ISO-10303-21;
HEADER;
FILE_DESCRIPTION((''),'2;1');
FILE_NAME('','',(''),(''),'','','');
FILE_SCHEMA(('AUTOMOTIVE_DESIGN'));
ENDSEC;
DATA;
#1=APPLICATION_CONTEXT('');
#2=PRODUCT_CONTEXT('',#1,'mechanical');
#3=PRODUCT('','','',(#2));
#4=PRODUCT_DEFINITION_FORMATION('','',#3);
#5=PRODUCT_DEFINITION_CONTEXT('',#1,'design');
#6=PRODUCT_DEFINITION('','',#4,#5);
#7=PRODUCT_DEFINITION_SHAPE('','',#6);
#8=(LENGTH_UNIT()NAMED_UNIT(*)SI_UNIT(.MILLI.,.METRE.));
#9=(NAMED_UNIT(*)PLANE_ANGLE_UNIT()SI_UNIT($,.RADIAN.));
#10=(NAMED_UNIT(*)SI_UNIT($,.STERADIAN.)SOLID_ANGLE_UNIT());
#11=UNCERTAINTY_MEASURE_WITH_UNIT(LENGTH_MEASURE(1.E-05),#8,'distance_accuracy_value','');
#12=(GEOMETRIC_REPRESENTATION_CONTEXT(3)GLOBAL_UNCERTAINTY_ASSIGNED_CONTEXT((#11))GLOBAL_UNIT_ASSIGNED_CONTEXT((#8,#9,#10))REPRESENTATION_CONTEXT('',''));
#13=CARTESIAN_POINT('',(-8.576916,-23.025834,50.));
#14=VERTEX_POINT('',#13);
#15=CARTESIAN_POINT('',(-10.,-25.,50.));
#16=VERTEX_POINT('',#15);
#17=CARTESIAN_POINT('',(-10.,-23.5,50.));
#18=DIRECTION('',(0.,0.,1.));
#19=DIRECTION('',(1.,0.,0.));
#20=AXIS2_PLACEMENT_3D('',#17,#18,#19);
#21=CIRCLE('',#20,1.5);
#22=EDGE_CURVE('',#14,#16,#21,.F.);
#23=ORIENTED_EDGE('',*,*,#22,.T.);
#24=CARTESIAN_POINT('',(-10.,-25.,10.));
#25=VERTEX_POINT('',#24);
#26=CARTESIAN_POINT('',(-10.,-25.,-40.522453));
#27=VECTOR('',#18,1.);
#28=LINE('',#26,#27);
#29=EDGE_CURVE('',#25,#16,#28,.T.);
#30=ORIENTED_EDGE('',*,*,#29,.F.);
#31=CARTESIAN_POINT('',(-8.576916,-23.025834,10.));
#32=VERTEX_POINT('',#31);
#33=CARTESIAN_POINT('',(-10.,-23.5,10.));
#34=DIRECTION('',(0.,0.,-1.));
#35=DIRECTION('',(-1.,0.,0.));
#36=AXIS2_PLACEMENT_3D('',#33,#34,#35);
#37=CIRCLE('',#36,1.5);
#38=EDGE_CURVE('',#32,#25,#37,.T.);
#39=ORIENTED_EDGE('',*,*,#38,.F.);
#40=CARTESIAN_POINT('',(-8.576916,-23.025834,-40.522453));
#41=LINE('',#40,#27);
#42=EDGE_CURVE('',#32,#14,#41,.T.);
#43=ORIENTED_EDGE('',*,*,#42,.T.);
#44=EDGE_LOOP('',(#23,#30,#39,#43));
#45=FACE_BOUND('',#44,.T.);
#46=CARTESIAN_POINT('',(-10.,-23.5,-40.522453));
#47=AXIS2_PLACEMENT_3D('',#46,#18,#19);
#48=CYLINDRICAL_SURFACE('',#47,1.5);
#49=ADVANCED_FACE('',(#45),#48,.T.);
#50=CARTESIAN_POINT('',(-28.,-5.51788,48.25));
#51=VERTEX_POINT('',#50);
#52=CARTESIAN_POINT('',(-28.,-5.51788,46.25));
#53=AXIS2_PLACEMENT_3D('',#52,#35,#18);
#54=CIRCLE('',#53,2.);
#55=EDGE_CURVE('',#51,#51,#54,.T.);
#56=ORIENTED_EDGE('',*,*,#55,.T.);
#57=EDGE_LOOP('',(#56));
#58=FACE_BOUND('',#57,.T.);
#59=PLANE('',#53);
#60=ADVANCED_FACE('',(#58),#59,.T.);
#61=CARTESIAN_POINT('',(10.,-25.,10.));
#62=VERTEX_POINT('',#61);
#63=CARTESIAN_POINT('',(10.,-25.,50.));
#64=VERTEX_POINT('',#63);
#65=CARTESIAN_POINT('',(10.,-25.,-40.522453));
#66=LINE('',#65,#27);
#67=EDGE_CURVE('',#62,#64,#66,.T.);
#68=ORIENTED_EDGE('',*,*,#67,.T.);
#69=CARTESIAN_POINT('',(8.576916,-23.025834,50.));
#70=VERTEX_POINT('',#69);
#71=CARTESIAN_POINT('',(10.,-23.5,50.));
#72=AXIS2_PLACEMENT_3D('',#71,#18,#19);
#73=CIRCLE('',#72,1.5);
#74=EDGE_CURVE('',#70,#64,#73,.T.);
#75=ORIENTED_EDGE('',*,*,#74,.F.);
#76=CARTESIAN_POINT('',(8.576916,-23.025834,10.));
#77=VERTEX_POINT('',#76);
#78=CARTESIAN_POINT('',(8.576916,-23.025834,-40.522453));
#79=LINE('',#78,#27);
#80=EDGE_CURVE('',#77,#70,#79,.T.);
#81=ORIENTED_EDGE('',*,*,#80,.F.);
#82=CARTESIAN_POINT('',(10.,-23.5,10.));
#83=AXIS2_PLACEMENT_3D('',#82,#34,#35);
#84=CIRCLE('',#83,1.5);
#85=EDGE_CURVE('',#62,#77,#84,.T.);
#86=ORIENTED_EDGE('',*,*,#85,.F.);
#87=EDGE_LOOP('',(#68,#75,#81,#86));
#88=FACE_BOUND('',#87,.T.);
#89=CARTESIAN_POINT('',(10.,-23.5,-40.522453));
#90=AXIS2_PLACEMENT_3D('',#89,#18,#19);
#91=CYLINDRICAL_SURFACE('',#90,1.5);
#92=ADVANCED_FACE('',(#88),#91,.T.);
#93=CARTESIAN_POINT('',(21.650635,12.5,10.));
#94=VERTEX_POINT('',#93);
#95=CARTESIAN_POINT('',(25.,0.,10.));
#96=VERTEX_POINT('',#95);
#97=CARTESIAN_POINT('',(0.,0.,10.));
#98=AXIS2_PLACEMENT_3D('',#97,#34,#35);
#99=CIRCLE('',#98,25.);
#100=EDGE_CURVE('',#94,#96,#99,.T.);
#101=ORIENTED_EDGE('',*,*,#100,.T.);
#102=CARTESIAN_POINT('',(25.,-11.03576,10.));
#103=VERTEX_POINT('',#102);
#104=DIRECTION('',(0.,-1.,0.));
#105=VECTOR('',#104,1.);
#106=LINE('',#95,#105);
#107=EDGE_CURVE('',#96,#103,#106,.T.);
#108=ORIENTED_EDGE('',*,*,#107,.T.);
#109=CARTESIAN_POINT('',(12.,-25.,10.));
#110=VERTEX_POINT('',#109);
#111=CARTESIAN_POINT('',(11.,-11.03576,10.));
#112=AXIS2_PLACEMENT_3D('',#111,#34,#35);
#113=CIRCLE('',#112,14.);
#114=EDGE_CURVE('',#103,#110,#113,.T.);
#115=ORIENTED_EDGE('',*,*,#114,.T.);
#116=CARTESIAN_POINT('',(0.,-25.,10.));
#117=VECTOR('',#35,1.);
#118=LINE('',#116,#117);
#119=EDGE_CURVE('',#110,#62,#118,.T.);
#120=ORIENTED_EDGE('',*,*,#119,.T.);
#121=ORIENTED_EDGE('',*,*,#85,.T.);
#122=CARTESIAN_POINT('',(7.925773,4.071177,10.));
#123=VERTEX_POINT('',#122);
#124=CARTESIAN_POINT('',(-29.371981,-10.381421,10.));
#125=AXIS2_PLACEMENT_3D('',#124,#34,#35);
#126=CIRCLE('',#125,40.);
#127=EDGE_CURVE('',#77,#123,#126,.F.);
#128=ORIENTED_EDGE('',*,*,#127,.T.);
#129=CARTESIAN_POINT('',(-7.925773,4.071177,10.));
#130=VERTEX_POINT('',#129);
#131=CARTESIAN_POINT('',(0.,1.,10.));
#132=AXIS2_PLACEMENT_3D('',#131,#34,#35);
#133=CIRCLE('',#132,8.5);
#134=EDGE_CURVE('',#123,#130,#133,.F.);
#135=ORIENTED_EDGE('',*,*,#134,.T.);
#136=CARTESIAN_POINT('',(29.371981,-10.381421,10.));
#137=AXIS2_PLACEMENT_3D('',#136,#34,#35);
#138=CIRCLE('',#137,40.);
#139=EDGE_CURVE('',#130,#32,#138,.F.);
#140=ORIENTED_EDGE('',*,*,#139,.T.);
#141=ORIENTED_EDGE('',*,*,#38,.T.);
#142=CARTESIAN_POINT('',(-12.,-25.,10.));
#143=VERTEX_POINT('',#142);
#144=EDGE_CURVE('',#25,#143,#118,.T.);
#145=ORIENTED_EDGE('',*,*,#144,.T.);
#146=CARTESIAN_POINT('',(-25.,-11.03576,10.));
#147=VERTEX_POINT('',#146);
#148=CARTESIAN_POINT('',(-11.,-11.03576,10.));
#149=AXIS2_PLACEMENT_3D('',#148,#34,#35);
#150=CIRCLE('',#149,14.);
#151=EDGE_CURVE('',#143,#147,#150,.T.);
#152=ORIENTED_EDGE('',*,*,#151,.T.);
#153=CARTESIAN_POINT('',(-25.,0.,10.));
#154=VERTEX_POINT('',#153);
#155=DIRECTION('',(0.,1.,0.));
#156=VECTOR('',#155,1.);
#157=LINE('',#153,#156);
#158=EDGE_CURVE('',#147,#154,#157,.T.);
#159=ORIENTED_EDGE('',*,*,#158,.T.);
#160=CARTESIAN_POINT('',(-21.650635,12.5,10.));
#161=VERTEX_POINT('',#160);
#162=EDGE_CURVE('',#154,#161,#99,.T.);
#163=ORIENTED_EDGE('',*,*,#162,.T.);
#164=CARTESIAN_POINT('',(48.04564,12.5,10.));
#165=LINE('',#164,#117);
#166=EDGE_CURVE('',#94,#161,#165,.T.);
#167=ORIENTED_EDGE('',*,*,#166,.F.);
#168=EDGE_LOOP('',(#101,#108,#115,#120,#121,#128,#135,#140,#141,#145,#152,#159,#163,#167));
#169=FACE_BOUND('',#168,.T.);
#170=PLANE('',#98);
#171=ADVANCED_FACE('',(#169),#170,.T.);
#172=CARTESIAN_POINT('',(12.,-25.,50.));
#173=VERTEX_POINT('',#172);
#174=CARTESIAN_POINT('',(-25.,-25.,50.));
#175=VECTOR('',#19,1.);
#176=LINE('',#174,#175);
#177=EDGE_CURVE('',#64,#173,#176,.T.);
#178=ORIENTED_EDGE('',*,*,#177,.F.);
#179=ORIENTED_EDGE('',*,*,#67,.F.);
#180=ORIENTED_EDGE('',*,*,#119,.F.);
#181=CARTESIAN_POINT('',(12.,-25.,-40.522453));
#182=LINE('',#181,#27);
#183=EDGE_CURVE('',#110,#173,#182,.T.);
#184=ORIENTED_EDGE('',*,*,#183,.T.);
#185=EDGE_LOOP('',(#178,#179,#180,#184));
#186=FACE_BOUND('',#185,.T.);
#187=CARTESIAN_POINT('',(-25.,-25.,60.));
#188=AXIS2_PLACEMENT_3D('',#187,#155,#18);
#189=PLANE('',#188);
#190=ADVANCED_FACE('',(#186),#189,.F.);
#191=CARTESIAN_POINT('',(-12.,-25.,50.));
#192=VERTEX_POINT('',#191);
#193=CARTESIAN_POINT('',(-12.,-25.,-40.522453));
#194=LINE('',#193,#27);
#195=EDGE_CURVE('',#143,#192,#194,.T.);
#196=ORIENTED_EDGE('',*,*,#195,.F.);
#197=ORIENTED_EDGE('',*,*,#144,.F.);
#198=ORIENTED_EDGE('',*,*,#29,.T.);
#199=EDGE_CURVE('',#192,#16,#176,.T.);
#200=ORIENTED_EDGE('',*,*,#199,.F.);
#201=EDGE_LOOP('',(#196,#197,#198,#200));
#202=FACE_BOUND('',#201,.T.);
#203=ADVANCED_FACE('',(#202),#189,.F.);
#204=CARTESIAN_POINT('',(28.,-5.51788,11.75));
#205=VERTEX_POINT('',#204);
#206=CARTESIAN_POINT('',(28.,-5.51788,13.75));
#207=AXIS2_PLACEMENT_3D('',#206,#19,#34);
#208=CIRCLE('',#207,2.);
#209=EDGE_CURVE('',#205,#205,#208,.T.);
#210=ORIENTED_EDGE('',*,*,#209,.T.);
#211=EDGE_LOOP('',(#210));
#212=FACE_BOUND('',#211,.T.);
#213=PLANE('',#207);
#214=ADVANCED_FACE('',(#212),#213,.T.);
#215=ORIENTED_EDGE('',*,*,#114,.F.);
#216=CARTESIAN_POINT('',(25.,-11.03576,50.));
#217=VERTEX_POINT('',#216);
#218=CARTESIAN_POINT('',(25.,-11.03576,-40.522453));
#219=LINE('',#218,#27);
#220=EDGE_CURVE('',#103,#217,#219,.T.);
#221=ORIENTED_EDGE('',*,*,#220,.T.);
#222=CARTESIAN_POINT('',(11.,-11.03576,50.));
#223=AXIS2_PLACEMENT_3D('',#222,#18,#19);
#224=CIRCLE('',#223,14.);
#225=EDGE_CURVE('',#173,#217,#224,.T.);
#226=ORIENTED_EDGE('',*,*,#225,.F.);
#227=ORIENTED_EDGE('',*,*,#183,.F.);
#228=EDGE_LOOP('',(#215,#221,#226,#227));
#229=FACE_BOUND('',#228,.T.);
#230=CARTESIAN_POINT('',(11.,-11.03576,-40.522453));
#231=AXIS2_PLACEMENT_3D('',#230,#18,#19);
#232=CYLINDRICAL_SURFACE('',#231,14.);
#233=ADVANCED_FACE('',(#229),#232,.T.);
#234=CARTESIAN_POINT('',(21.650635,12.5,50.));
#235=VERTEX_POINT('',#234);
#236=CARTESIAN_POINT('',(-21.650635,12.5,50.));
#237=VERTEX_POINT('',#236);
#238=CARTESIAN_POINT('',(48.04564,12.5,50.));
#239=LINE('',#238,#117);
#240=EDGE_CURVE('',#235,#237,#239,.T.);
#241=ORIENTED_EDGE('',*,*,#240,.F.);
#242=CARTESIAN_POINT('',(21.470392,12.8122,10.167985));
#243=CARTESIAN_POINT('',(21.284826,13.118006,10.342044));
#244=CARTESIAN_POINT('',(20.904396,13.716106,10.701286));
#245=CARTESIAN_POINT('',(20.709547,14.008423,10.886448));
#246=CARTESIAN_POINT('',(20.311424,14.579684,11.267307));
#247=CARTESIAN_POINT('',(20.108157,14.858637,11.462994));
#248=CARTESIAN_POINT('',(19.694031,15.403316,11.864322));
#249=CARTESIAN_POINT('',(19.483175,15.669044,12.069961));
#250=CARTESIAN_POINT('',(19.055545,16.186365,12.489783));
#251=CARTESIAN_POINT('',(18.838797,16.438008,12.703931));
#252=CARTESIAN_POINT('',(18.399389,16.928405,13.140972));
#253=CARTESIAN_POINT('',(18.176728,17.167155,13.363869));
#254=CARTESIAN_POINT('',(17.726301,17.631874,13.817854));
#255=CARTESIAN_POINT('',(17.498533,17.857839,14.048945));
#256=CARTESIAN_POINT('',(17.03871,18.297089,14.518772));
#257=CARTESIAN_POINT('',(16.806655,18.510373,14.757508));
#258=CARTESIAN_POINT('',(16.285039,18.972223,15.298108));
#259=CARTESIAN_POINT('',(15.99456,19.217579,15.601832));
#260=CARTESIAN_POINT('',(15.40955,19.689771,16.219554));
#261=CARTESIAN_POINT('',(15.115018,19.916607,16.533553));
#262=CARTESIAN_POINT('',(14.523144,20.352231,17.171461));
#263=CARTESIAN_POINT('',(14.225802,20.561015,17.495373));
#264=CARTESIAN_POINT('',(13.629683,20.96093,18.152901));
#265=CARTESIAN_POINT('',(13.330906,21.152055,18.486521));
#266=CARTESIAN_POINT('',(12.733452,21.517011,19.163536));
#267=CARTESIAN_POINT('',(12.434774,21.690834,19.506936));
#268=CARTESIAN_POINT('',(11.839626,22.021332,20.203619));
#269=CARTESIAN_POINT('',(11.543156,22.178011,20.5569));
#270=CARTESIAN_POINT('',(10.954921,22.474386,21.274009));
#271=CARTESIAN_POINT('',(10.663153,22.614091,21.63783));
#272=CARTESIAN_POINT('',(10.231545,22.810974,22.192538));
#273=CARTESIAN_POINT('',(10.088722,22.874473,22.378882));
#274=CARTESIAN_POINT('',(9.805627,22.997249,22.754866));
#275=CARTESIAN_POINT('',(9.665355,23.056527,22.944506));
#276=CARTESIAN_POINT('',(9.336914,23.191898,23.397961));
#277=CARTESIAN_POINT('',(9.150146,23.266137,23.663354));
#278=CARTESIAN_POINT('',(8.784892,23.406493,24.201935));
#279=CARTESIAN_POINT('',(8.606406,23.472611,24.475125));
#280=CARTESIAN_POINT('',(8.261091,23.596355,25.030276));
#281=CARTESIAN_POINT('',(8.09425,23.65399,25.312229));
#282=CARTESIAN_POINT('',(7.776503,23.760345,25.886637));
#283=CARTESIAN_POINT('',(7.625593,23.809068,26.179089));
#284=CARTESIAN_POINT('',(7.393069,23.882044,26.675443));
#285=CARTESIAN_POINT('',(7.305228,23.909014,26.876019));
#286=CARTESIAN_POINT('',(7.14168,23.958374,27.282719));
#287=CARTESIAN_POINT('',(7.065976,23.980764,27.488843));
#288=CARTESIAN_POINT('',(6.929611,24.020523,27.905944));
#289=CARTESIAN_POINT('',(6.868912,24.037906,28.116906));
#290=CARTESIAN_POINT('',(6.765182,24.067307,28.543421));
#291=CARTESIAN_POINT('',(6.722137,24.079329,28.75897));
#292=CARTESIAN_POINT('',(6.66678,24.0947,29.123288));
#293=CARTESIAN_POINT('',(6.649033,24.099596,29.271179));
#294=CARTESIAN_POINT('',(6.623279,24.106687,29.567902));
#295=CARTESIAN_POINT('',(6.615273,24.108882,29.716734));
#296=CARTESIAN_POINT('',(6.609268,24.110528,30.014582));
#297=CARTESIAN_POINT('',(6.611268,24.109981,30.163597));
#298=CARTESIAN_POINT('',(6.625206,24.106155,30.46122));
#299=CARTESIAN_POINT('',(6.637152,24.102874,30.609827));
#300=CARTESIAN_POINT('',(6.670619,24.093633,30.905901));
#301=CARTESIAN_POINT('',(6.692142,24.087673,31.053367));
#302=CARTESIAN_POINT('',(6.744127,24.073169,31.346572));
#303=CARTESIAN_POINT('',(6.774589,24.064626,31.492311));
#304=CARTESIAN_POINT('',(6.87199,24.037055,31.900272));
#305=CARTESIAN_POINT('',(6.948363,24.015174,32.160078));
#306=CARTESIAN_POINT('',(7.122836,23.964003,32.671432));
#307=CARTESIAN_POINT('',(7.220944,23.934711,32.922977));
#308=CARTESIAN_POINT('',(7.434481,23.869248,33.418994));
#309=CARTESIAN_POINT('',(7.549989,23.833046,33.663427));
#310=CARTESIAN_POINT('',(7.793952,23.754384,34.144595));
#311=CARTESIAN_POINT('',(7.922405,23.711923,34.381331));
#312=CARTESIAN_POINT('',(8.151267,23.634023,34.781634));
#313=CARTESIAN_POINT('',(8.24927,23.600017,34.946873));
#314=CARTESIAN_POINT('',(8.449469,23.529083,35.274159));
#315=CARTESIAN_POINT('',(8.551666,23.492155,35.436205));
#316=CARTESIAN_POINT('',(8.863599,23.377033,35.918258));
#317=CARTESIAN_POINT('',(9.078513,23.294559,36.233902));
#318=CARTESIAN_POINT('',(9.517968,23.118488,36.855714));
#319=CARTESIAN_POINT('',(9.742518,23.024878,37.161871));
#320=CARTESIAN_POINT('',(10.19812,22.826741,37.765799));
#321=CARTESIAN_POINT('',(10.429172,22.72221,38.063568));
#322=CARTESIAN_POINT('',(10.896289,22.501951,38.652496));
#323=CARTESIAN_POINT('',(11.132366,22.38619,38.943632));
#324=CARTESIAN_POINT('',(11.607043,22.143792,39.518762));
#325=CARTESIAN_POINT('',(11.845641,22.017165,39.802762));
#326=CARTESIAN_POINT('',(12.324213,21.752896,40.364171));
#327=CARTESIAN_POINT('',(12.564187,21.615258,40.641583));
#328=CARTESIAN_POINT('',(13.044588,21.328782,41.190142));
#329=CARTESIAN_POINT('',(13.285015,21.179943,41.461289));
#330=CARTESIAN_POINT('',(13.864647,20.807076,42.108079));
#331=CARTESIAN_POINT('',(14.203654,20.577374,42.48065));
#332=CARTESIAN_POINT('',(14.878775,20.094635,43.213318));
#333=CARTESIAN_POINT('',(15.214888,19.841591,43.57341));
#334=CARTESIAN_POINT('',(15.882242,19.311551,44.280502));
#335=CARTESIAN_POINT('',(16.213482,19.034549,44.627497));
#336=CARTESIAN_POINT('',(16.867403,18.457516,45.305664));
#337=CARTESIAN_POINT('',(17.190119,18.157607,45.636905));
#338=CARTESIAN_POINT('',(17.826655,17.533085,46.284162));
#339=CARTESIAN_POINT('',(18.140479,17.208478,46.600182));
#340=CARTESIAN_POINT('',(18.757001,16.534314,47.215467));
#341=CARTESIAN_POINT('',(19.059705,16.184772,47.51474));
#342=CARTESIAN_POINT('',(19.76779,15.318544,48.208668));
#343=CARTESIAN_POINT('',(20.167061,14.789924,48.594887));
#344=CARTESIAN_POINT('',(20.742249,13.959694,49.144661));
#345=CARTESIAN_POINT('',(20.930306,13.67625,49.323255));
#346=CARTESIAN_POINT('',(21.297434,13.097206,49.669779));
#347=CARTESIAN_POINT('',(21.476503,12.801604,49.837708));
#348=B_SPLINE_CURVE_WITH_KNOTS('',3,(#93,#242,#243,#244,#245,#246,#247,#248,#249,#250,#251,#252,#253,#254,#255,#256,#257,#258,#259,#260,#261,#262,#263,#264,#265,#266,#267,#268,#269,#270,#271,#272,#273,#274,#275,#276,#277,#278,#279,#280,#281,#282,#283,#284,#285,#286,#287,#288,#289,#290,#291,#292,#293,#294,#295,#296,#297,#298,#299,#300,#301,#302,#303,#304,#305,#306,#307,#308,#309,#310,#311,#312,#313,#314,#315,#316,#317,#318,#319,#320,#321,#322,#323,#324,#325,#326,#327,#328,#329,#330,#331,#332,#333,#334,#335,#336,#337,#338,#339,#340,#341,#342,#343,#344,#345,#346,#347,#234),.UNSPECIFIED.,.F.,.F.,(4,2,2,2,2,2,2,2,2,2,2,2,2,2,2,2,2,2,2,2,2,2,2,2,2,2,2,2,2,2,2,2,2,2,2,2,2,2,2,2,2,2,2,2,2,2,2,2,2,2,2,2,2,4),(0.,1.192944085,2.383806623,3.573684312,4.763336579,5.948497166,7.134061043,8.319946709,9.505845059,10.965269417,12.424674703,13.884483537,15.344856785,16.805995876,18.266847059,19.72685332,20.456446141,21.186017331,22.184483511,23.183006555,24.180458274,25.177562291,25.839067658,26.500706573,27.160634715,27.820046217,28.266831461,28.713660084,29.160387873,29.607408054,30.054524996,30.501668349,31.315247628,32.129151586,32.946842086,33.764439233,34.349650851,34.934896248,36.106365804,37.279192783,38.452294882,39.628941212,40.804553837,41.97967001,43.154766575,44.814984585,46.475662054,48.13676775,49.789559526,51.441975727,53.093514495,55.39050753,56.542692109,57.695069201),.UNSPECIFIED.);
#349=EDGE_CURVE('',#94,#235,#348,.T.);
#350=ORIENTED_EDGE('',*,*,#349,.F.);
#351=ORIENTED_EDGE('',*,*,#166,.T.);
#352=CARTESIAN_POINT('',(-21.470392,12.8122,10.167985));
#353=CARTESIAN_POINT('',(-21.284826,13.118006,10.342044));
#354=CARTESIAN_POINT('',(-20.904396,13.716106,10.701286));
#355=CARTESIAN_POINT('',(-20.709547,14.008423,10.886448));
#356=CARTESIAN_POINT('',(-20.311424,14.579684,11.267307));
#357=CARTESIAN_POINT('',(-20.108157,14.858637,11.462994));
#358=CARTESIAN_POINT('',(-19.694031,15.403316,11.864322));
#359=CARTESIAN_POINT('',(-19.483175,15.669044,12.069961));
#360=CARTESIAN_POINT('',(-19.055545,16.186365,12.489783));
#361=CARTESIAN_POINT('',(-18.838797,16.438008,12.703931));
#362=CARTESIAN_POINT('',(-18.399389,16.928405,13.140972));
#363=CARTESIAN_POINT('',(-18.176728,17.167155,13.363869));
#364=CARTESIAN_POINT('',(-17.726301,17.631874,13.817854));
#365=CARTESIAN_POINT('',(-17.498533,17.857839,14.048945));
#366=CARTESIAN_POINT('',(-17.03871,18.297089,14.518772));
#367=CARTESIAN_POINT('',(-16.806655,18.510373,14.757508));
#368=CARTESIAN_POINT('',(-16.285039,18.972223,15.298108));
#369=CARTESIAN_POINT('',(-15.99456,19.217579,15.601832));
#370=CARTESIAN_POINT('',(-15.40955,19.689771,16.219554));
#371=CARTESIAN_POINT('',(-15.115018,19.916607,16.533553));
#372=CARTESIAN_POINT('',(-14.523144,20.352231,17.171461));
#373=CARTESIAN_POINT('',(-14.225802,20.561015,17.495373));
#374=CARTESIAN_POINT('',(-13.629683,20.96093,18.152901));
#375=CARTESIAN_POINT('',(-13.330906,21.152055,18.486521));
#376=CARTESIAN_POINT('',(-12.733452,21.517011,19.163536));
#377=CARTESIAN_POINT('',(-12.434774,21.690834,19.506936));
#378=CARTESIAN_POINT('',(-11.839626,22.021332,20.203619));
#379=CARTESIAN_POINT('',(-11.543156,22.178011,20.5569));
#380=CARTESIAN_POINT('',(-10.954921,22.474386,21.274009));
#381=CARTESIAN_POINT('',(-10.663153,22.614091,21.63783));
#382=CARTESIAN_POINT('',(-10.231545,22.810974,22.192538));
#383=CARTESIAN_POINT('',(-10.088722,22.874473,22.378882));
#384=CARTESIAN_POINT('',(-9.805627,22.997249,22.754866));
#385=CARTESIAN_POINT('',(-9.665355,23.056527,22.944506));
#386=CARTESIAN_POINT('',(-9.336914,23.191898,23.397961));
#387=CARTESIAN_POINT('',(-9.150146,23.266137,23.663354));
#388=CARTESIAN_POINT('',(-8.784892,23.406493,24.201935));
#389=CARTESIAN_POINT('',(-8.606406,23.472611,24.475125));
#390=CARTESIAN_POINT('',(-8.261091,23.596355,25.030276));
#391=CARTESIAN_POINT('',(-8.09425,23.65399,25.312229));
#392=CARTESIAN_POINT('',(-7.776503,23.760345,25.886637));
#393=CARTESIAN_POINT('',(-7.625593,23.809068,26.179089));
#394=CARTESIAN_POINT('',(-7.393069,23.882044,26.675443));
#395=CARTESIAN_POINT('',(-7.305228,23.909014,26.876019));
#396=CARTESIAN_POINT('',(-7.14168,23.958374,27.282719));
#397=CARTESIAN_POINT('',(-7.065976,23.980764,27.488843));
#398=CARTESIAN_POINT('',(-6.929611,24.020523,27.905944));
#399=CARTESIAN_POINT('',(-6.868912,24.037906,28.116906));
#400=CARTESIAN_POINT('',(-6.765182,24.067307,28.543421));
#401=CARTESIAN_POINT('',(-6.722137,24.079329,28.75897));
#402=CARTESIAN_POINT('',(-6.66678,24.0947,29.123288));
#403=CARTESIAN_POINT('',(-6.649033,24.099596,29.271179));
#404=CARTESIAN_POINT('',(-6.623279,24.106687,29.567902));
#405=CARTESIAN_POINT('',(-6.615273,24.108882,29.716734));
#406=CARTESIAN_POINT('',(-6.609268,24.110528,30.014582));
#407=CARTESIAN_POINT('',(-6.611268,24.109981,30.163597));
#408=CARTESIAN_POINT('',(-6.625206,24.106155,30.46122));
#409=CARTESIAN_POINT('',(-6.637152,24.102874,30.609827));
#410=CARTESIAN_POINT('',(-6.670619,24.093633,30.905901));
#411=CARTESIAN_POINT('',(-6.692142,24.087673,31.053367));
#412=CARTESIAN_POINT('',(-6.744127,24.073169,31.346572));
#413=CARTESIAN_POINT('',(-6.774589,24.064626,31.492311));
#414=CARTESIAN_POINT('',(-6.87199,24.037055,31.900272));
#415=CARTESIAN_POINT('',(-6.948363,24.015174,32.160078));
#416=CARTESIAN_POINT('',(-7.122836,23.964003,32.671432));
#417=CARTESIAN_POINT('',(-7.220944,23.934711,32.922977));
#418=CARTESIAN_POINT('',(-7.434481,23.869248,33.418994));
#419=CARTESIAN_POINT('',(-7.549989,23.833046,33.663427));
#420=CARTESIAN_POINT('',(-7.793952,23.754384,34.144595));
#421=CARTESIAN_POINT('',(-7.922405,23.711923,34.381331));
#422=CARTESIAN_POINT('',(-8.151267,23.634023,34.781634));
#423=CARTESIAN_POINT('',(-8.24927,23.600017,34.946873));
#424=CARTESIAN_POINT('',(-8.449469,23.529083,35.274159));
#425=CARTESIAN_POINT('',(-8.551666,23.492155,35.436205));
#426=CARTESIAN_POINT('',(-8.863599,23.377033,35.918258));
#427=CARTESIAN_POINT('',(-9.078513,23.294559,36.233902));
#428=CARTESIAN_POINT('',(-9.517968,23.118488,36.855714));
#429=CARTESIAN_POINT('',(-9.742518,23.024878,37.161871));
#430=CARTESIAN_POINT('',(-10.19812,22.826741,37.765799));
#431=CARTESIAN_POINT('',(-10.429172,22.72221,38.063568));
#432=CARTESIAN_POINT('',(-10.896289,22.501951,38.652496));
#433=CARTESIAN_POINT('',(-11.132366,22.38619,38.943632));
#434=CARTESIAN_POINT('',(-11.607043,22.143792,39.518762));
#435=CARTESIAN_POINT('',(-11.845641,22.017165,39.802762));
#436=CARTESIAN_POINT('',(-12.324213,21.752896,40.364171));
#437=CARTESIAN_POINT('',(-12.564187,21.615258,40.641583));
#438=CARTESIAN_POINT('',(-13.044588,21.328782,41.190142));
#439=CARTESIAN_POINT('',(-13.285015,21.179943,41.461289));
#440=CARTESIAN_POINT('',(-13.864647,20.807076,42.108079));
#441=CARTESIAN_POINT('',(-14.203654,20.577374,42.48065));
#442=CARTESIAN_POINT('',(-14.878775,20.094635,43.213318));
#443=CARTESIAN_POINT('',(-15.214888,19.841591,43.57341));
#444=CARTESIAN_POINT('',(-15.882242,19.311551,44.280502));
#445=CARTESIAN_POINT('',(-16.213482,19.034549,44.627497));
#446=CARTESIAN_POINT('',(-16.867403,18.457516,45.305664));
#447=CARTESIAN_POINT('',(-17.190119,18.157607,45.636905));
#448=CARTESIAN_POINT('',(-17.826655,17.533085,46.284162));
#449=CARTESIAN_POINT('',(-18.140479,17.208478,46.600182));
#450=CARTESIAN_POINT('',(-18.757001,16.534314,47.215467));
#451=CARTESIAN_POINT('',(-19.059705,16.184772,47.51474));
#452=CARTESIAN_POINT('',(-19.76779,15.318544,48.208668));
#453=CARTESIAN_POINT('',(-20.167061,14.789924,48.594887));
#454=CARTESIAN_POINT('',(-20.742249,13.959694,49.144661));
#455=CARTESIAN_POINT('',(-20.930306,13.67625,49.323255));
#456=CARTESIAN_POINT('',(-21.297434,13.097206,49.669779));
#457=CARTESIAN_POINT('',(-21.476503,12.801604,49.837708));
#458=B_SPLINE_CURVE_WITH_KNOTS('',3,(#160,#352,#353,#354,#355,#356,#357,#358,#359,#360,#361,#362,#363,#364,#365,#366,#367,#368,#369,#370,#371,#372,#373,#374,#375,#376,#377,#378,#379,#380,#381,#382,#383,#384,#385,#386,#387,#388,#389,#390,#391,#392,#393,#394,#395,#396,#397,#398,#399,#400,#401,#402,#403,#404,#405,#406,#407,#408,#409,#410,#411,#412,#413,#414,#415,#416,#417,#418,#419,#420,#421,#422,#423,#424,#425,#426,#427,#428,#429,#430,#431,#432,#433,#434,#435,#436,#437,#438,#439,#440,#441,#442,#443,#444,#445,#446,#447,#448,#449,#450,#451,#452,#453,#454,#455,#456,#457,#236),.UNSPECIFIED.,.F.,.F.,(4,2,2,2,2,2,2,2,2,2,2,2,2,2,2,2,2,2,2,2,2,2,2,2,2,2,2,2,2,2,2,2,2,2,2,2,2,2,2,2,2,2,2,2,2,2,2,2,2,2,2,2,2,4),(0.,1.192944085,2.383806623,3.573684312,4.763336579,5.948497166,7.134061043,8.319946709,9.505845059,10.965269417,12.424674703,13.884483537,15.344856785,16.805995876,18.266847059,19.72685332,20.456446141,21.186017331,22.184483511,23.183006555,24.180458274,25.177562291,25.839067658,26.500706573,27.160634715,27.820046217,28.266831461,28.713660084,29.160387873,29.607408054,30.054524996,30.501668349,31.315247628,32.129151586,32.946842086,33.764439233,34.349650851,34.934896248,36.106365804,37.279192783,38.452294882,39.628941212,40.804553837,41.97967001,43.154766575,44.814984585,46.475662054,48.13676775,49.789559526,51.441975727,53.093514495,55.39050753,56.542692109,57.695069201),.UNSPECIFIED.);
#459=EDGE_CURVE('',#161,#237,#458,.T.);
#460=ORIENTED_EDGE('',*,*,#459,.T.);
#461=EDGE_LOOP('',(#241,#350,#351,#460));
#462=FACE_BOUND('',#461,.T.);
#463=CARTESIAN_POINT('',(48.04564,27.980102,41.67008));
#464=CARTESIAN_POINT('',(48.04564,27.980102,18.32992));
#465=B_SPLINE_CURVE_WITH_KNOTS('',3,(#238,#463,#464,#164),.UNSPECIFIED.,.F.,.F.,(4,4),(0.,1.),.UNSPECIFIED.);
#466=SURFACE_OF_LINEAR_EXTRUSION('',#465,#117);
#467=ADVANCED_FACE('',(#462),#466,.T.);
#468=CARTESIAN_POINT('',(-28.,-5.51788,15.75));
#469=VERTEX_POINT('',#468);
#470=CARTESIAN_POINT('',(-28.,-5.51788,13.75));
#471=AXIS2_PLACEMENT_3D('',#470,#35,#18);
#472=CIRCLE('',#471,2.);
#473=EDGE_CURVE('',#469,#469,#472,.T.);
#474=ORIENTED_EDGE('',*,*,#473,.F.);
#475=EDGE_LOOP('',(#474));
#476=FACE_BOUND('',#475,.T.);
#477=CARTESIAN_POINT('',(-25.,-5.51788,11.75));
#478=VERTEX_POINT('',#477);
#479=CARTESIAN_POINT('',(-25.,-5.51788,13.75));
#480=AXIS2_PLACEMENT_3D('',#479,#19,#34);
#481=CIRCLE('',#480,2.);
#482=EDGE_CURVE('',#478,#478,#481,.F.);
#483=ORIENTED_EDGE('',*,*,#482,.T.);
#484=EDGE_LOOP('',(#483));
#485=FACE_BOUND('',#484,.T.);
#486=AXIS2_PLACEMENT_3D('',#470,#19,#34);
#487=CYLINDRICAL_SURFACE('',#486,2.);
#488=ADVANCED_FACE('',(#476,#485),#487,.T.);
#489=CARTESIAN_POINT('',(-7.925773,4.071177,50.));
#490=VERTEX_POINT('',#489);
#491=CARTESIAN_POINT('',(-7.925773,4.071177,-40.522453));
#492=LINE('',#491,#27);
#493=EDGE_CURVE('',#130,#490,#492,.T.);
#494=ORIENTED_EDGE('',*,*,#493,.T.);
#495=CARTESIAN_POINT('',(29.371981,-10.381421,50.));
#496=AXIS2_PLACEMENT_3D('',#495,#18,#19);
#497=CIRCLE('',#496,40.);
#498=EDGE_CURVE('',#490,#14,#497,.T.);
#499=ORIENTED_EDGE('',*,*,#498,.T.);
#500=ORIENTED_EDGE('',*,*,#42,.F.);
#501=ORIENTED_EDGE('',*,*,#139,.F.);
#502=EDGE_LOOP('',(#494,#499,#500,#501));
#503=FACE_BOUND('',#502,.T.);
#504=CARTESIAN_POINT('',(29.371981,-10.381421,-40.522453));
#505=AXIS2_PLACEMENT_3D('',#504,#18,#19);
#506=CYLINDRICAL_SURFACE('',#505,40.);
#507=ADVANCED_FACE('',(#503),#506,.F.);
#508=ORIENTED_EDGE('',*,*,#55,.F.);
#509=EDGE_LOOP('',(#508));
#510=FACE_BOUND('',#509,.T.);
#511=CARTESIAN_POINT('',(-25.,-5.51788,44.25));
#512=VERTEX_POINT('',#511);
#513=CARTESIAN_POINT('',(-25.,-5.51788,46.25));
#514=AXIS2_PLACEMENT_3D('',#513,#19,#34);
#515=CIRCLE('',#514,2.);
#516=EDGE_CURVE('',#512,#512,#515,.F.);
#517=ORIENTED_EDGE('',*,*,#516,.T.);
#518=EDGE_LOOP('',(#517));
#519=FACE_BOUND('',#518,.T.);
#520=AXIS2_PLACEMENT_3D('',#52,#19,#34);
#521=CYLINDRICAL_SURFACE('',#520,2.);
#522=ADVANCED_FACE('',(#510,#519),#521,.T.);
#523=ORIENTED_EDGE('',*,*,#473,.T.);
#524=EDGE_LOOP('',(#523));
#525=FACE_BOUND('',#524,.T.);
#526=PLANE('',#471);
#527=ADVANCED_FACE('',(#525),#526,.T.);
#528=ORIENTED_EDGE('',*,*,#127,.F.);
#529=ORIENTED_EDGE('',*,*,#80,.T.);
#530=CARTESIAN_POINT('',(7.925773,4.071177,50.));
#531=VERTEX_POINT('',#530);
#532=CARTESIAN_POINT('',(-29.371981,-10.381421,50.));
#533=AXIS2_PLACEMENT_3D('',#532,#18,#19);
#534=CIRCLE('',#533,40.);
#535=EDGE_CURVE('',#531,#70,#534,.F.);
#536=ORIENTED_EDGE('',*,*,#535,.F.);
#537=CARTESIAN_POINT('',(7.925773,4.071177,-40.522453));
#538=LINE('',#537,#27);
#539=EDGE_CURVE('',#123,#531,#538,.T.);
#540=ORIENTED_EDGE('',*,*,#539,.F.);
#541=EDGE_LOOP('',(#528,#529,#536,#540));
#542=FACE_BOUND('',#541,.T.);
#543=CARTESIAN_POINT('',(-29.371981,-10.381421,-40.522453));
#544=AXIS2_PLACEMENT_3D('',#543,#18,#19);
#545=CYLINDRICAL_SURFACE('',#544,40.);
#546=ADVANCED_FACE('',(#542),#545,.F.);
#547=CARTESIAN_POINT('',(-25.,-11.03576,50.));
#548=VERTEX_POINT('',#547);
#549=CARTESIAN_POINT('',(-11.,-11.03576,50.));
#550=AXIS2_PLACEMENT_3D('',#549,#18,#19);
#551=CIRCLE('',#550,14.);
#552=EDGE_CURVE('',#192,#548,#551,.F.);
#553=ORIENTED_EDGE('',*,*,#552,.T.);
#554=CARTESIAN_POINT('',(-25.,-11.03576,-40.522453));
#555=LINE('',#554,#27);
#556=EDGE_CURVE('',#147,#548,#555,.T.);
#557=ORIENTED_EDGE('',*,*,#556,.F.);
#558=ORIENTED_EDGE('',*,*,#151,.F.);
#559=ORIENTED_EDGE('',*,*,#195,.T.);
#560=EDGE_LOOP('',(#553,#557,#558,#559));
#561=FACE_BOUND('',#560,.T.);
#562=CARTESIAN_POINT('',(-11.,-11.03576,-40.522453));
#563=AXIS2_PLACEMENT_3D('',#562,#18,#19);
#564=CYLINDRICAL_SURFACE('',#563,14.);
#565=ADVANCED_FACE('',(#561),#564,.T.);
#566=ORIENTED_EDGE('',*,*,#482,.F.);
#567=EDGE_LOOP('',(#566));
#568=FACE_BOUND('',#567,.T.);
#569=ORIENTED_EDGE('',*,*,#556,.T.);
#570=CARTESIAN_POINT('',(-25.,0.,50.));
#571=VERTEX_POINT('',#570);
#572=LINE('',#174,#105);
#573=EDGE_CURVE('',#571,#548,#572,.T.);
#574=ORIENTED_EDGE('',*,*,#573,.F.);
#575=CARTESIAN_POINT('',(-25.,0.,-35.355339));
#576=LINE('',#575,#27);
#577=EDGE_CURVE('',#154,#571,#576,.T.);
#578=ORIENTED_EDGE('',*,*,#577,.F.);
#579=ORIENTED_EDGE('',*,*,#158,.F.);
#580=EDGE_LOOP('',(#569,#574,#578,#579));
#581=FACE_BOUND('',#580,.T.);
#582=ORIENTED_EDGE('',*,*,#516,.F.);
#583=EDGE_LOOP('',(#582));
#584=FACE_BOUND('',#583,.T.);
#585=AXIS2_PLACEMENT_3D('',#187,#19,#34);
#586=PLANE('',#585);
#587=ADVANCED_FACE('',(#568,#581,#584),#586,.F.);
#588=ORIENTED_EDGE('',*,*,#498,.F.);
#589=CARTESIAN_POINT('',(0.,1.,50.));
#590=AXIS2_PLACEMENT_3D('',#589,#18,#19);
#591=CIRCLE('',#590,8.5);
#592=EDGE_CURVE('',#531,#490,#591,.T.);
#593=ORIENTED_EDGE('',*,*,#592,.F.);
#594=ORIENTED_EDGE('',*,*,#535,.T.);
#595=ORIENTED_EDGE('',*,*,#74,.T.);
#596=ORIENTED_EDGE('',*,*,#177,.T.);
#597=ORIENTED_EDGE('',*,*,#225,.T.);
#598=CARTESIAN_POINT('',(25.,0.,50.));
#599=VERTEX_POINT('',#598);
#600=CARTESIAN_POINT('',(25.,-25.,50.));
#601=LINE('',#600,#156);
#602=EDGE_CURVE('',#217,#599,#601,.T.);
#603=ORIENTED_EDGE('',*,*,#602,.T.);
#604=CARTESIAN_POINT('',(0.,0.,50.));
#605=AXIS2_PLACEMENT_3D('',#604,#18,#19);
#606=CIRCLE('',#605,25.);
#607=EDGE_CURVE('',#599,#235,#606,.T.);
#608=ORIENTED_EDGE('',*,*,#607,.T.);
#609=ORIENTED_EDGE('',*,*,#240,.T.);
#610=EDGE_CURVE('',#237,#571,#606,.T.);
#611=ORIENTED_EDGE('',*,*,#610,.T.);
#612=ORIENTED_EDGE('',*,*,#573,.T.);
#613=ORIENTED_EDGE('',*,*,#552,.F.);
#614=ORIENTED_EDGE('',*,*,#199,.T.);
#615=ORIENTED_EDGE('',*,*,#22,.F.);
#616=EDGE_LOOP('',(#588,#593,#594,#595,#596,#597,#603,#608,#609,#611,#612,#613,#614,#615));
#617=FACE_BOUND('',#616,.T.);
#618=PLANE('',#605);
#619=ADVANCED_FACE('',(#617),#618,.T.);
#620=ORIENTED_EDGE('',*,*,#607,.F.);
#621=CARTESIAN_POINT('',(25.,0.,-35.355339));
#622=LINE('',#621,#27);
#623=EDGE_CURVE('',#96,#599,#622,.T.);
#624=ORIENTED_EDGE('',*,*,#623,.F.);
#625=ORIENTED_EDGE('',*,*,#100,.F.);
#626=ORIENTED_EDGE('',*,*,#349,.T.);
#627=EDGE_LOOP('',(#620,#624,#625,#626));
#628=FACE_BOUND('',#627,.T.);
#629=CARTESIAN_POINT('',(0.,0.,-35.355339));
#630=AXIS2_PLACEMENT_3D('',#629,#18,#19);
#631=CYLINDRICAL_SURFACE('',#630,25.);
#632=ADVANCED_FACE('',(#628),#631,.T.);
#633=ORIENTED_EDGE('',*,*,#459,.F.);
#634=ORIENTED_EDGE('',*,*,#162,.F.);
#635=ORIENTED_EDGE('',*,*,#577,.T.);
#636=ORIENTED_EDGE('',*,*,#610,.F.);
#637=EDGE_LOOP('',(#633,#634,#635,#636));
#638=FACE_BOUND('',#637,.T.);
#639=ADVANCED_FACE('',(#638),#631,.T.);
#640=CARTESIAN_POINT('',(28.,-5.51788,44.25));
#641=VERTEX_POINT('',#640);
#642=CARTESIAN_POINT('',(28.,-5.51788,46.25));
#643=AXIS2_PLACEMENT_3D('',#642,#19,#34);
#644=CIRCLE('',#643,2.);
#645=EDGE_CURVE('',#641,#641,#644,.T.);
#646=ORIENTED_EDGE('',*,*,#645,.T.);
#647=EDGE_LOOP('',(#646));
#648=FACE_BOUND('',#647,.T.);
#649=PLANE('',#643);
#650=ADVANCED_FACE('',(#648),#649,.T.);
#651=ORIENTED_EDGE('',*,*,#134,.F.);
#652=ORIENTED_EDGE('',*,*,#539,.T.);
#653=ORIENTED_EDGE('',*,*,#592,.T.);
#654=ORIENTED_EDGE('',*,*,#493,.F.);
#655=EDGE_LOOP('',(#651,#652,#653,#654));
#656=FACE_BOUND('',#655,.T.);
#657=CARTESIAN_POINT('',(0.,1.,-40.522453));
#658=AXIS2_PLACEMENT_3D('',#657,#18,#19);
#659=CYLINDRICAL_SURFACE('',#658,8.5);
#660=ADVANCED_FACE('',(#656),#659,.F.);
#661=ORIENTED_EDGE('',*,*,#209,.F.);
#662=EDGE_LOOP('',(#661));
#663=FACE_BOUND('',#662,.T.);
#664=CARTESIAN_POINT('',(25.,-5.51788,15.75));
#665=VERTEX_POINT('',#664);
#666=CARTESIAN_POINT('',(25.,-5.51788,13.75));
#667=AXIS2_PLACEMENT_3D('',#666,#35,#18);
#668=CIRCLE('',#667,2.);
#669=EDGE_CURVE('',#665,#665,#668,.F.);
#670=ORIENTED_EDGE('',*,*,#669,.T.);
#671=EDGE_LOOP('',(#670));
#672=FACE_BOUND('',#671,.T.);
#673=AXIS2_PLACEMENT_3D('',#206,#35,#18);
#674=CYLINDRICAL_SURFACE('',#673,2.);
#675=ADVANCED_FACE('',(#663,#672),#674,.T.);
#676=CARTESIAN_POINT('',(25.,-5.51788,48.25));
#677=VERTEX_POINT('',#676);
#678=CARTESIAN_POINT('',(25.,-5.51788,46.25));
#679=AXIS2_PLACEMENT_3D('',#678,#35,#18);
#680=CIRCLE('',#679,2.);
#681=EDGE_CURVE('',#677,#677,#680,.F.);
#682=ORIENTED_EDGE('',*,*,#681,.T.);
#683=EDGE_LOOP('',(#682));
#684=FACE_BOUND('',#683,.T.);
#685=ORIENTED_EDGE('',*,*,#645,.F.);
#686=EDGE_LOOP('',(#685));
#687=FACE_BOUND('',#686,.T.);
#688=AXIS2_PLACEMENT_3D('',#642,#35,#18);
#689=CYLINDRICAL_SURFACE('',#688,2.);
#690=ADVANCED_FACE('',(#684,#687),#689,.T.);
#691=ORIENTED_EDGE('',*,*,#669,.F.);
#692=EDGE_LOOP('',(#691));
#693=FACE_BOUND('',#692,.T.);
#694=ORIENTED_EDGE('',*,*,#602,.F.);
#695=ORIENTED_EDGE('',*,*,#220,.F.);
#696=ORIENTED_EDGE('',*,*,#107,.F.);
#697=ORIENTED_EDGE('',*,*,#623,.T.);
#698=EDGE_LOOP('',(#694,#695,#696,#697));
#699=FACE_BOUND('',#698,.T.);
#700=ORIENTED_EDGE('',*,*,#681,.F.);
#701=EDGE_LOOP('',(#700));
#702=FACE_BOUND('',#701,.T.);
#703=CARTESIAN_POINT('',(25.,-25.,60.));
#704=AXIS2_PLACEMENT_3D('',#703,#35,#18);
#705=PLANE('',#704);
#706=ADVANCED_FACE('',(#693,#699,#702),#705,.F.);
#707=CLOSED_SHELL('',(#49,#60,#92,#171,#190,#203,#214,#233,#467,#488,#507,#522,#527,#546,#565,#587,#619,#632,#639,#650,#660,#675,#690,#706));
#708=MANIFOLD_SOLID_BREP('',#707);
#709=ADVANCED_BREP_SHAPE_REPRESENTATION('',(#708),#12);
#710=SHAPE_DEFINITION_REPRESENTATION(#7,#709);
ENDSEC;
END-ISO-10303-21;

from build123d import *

# Parameters (mm, degrees)
SKETCH1_W                           = 50
SKETCH1_H                           = 50
BOSS_EXTRUDE1_DEPTH                 = 60
CUT_EXTRUDE1_DEPTH                  = 60
CUT_EXTRUDE2_START                  = -60
CUT_EXTRUDE2_DEPTH                  = 60
SKETCH5_OUTSIDE_W                   = 70.548
SKETCH5_OUTSIDE_H                   = 70.548
CUT_EXTRUDE3_DEPTH                  = 10
CUT_EXTRUDE4_DEPTH                  = 10
FILLET1_R                           = 1
SKETCH7_R                           = 2
BOSS_EXTRUDE2_DEPTH                 = 2
BOSS_EXTRUDE3_START                 = 2
SKETCH8_R                           = 2
BOSS_EXTRUDE3_DEPTH                 = 2
SKETCH9_R                           = 2.25
CUT_EXTRUDE5_DEPTH                  = 2
CUT_EXTRUDE6_START                  = -2
SKETCH10_R                          = 2.25
CUT_EXTRUDE6_DEPTH                  = 2
FILLET2_R                           = 1
CUT_EXTRUDE7_REACH                  = 71.642
CUT_EXTRUDE7_END_RADIUS             = 25
CUT_EXTRUDE7_DIRECTION_2_REACH      = 71.642
CUT_EXTRUDE7_DIRECTION_2_END_RADIUS = 25
SKETCH12_W                          = 10
SKETCH12_H                          = 10
CUT_EXTRUDE8_DEPTH                  = 29.758852585
SKETCH13_W                          = 10
SKETCH13_H                          = 14.003619208
CUT_EXTRUDE9_DEPTH                  = 31.758852585
SKETCH14_R                          = 2
BOSS_EXTRUDE4_DEPTH                 = 3
BOSS_EXTRUDE5_START                 = 3
SKETCH15_R                          = 2
BOSS_EXTRUDE5_DEPTH                 = 3


# Read off the part's stored shape, not the designer's step: Cut-Extrude2
with BuildPart() as part:
    # Sketch1 → Boss-Extrude1 (new body)
    with BuildSketch(Plane.XY):
        Rectangle(SKETCH1_W, SKETCH1_H)
    extrude(amount=BOSS_EXTRUDE1_DEPTH)

    # Sketch3 → Cut-Extrude1 (cut)
    with BuildSketch(Plane.XY.offset(60)):
        with BuildLine():
            Line((-25, 25), (-25, 0))
            ThreePointArc((-25, 0), (-17.677669541, 17.677669518), (-3.2e-08, 25))
            Line((-3.2e-08, 25), (-25, 25))
        make_face()
        with BuildLine():
            Line((25, 25), (-3.2e-08, 25))
            ThreePointArc((-3.2e-08, 25), (17.677669518, 17.677669541), (25, 0))
            Line((25, 0), (25, 25))
        make_face()
    extrude(amount=-CUT_EXTRUDE1_DEPTH, mode=Mode.SUBTRACT)

    # Cut-Extrude2 outline → Cut-Extrude2 (cut)
    with BuildSketch(Plane.XY.offset(60).offset(CUT_EXTRUDE2_START)):
        with BuildLine():
            ThreePointArc((8.576916353, -23.025834486), (10.616475204, -9.420494413), (7.92577262, 4.071177033))
            ThreePointArc((7.92577262, 4.071177033), (0, 9.5), (-7.92577262, 4.071177033))
            ThreePointArc((-7.92577262, 4.071177033), (-10.616475204, -9.420494413), (-8.576916353, -23.025834486))
            ThreePointArc((-8.576916353, -23.025834486), (-8.783191003, -24.377140732), (-10, -25))
            Line((-10, -25), (10, -25))
            ThreePointArc((10, -25), (8.783191003, -24.377140732), (8.576916353, -23.025834486))
        make_face()
        with BuildLine():
            ThreePointArc((25, -11.035759956), (21.246950766, -20.57515197), (12, -25))
            Line((12, -25), (25, -25))
            Line((25, -25), (25, -11.035759956))
        make_face()
        with BuildLine():
            Line((-25, -25), (-12, -25))
            ThreePointArc((-12, -25), (-21.246950766, -20.57515197), (-25, -11.035759956))
            Line((-25, -11.035759956), (-25, -25))
        make_face()
    extrude(amount=CUT_EXTRUDE2_DEPTH, mode=Mode.SUBTRACT)

    # Sketch5 outside → Cut-Extrude3 (cut)
    with BuildSketch(Plane.XY.offset(60)):
        Rectangle(SKETCH5_OUTSIDE_W, SKETCH5_OUTSIDE_H)
        with BuildLine():
            Line((-7.92577262, 4.071177033), (-12.879426293, 4.071177033))
            Line((-12.879426293, 4.071177033), (-12.879426293, -5.928822967))
            Line((-12.879426293, -5.928822967), (-10.379426293, -5.928822967))
            ThreePointArc((-10.379426293, -5.928822967), (-9.475712618, -0.849542187), (-7.92577262, 4.071177033))
        make_face(mode=Mode.SUBTRACT)
        with BuildLine():
            Line((7.92577262, 4.071177033), (12.879426293, 4.071177033))
            Line((12.879426293, 4.071177033), (12.879426293, -5.928822967))
            Line((12.879426293, -5.928822967), (10.379426293, -5.928822967))
            ThreePointArc((10.379426293, -5.928822967), (9.475712618, -0.849542187), (7.92577262, 4.071177033))
        make_face(mode=Mode.SUBTRACT)
    extrude(amount=-CUT_EXTRUDE3_DEPTH, mode=Mode.SUBTRACT)

    # Sketch6 → Cut-Extrude4 (cut)
    # profile 1 of 4: a face of its own
    with BuildSketch(Plane(origin=(0, 0, 0), x_dir=(-1, 0, 0), z_dir=(0, 0, -1))):
        with BuildLine():
            Line((0, 9.5), (0, 25))
            ThreePointArc((0, 25), (-17.67766953, 17.67766953), (-25, 0))
            Line((-25, 0), (-25, -11.035759956))
            ThreePointArc((-25, -11.035759956), (-21.246950766, -20.57515197), (-12, -25))
            Line((-12, -25), (-10, -25))
            ThreePointArc((-10, -25), (-8.783191003, -24.377140732), (-8.576916353, -23.025834486))
            ThreePointArc((-8.576916353, -23.025834486), (-10.289550459, -15.574005024), (-10.552980025, -7.932442175))
            ThreePointArc((-10.552980025, -7.932442175), (-10.478797406, -6.929541656), (-10.379426293, -5.928822967))
            ThreePointArc((-10.379426293, -5.928822967), (-9.475712618, -0.849542187), (-7.92577262, 4.071177033))
            ThreePointArc((-7.92577262, 4.071177033), (-4.803383975, 8.012667281), (0, 9.5))
        make_face()
        with BuildLine():
            Line((-12.879426293, 6.071177033), (-12.879426293, 3.071177033))
            Line((-12.879426293, 3.071177033), (-12.879426293, -4.928822967))
            Line((-12.879426293, -4.928822967), (-12.879426293, -7.932442175))
            Line((-12.879426293, -7.932442175), (-14.879423018, -7.932442175))
            ThreePointArc((-14.879423018, -7.932442175), (-15.586532115, -7.639547997), (-15.879426293, -6.932438901))
            Line((-15.879426293, -6.932438901), (-15.879426293, 5.071173759))
            ThreePointArc((-15.879426293, 5.071173759), (-15.586532115, 5.778282855), (-14.879423018, 6.071177033))
            Line((-14.879423018, 6.071177033), (-12.879426293, 6.071177033))
        make_face(mode=Mode.SUBTRACT)
    # profile 2 of 4: a face of its own
    with BuildSketch(Plane(origin=(0, 0, 0), x_dir=(-1, 0, 0), z_dir=(0, 0, -1))):
        with BuildLine():
            ThreePointArc((25, 0), (17.67766953, 17.67766953), (0, 25))
            Line((0, 25), (0, 9.5))
            ThreePointArc((0, 9.5), (4.803383975, 8.012667281), (7.92577262, 4.071177033))
            ThreePointArc((7.92577262, 4.071177033), (10.616475204, -9.420494413), (8.576916353, -23.025834486))
            ThreePointArc((8.576916353, -23.025834486), (8.783191003, -24.377140732), (10, -25))
            Line((10, -25), (12, -25))
            ThreePointArc((12, -25), (21.246950766, -20.57515197), (25, -11.035759956))
            Line((25, -11.035759956), (25, 0))
        make_face()
        with BuildLine():
            Line((12.879426293, -4.928822967), (12.879426293, 3.071177033))
            Line((12.879426293, 3.071177033), (12.879426293, 6.071177033))
            Line((12.879426293, 6.071177033), (14.879423018, 6.071177033))
            ThreePointArc((14.879423018, 6.071177033), (15.586532115, 5.778282855), (15.879426293, 5.071173759))
            Line((15.879426293, 5.071173759), (15.879426293, -6.932438901))
            ThreePointArc((15.879426293, -6.932438901), (15.586532115, -7.639547997), (14.879423018, -7.932442175))
            Line((14.879423018, -7.932442175), (12.879426293, -7.932442175))
            Line((12.879426293, -7.932442175), (12.879426293, -4.928822967))
        make_face(mode=Mode.SUBTRACT)
    # profile 3 of 4: a face of its own
    with BuildSketch(Plane(origin=(0, 0, 0), x_dir=(-1, 0, 0), z_dir=(0, 0, -1))):
        with BuildLine():
            Line((0, 9.5), (0, 25))
            ThreePointArc((0, 25), (-17.67766953, 17.67766953), (-25, 0))
            Line((-25, 0), (-25, -11.035759956))
            ThreePointArc((-25, -11.035759956), (-21.246950766, -20.57515197), (-12, -25))
            Line((-12, -25), (-10, -25))
            ThreePointArc((-10, -25), (-8.783191003, -24.377140732), (-8.576916353, -23.025834486))
            ThreePointArc((-8.576916353, -23.025834486), (-10.289550459, -15.574005024), (-10.552980025, -7.932442175))
            ThreePointArc((-10.552980025, -7.932442175), (-10.478797406, -6.929541656), (-10.379426293, -5.928822967))
            ThreePointArc((-10.379426293, -5.928822967), (-9.475712618, -0.849542187), (-7.92577262, 4.071177033))
            ThreePointArc((-7.92577262, 4.071177033), (-4.803383975, 8.012667281), (0, 9.5))
        make_face()
        with BuildLine():
            Line((-12.879426293, 6.071177033), (-12.879426293, 3.071177033))
            Line((-12.879426293, 3.071177033), (-12.879426293, -4.928822967))
            Line((-12.879426293, -4.928822967), (-12.879426293, -7.932442175))
            Line((-12.879426293, -7.932442175), (-14.879423018, -7.932442175))
            ThreePointArc((-14.879423018, -7.932442175), (-15.586532115, -7.639547997), (-15.879426293, -6.932438901))
            Line((-15.879426293, -6.932438901), (-15.879426293, 5.071173759))
            ThreePointArc((-15.879426293, 5.071173759), (-15.586532115, 5.778282855), (-14.879423018, 6.071177033))
            Line((-14.879423018, 6.071177033), (-12.879426293, 6.071177033))
        make_face(mode=Mode.SUBTRACT)
    # profile 4 of 4: a face of its own
    with BuildSketch(Plane(origin=(0, 0, 0), x_dir=(-1, 0, 0), z_dir=(0, 0, -1))):
        with BuildLine():
            ThreePointArc((25, 0), (17.67766953, 17.67766953), (0, 25))
            Line((0, 25), (0, 9.5))
            ThreePointArc((0, 9.5), (4.803383975, 8.012667281), (7.92577262, 4.071177033))
            ThreePointArc((7.92577262, 4.071177033), (10.616475204, -9.420494413), (8.576916353, -23.025834486))
            ThreePointArc((8.576916353, -23.025834486), (8.783191003, -24.377140732), (10, -25))
            Line((10, -25), (12, -25))
            ThreePointArc((12, -25), (21.246950766, -20.57515197), (25, -11.035759956))
            Line((25, -11.035759956), (25, 0))
        make_face()
        with BuildLine():
            Line((12.879426293, -4.928822967), (12.879426293, 3.071177033))
            Line((12.879426293, 3.071177033), (12.879426293, 6.071177033))
            Line((12.879426293, 6.071177033), (14.879423018, 6.071177033))
            ThreePointArc((14.879423018, 6.071177033), (15.586532115, 5.778282855), (15.879426293, 5.071173759))
            Line((15.879426293, 5.071173759), (15.879426293, -6.932438901))
            ThreePointArc((15.879426293, -6.932438901), (15.586532115, -7.639547997), (14.879423018, -7.932442175))
            Line((14.879423018, -7.932442175), (12.879426293, -7.932442175))
            Line((12.879426293, -7.932442175), (12.879426293, -4.928822967))
        make_face(mode=Mode.SUBTRACT)
    extrude(amount=-CUT_EXTRUDE4_DEPTH, mode=Mode.SUBTRACT)

    # Fillet1
    fillet1_edges = [part.edges().sort_by_distance(p)[0] for p in [
        (12.879426293, 4.071177033, 55),
        (12.879426293, -5.928822967, 55),
        (-12.879426293, -5.928822967, 55),
        (-12.879426293, 4.071177033, 55),
    ]]
    fillet(fillet1_edges, radius=FILLET1_R)

    # Sketch7 → Boss-Extrude2 (add)
    with BuildSketch(Plane.ZY.offset(12.879426293)):
        with Locations(Location((55, -0.928822967, 0), (0, 0, 270))):
            Circle(SKETCH7_R)
    extrude(amount=BOSS_EXTRUDE2_DEPTH)

    # Sketch8 → Boss-Extrude3 (add)
    with BuildSketch(Plane(origin=(12.879426293, 0, 0), x_dir=(0, 0, -1), z_dir=(1, 0, 0)).offset(BOSS_EXTRUDE3_START)):
        with Locations(Location((-55, -0.928822967, 0), (0, 0, 270))):
            Circle(SKETCH8_R)
    extrude(amount=-BOSS_EXTRUDE3_DEPTH)

    # Sketch9 → Cut-Extrude5 (cut)
    with BuildSketch(Plane.ZY.offset(-12.879426293)):
        with Locations(Location((5, -0.930632571, 0), (0, 0, 270))):
            Circle(SKETCH9_R)
    extrude(amount=-CUT_EXTRUDE5_DEPTH, mode=Mode.SUBTRACT)

    # Sketch10 → Cut-Extrude6 (cut)
    with BuildSketch(Plane(origin=(-12.879426293, 0, 0), x_dir=(0, 0, -1), z_dir=(1, 0, 0)).offset(CUT_EXTRUDE6_START)):
        with Locations(Location((-5, -0.930632571, 0), (0, 0, 270))):
            Circle(SKETCH10_R)
    extrude(amount=CUT_EXTRUDE6_DEPTH, mode=Mode.SUBTRACT)

    # Fillet2
    fillet2_edges = [part.edges().sort_by_distance(p)[0] for p in [
        (-12.879426293, 6.071177033, 5),
        (-12.879426293, -7.932442175, 5),
        (12.879426293, -7.932442175, 5),
        (12.879426293, 6.071177033, 5),
    ]]
    fillet(fillet2_edges, radius=FILLET2_R)

    # Cut-Extrude7: up to this cylinder (the profile starts inside it)
    cut_extrude7_end = Plane(origin=(0, 0, 27.7442175), z_dir=(0, 0, 1)) * Cylinder(CUT_EXTRUDE7_END_RADIUS, 227.198087, mode=Mode.PRIVATE)
    # Sketch11 → Cut-Extrude7 (cut, up to the surface)
    with BuildSketch(Plane(origin=(0, 0, 0), x_dir=(0, 0, -1), z_dir=(1, 0, 0)), mode=Mode.PRIVATE) as cut_extrude7_sk1:
        with BuildLine():
            add(Edge.make_bspline(
                [(-50, 12.5), (-45.835040113, 20.240050977), (-37.917520056, 24.110076465), (-30, 24.110076465)],
                knots=[0, 0, 0, 0, 0.5, 0.5, 0.5, 0.5], degree=3))
            Line((-30, 24.110076465), (-30, 25))
            Line((-30, 25), (-50, 25))
            Line((-50, 25), (-50, 12.5))
        make_face()
    cut_extrude7_tool1 = extrude(cut_extrude7_sk1.sketch, amount=CUT_EXTRUDE7_REACH, mode=Mode.PRIVATE) & cut_extrude7_end
    add(cut_extrude7_tool1.solids().sort_by_distance((0, 21.671006, 44.201261))[0], mode=Mode.SUBTRACT)
    # Sketch11 → Cut-Extrude7 (cut, up to the surface)
    with BuildSketch(Plane(origin=(0, 0, 0), x_dir=(0, 0, -1), z_dir=(1, 0, 0)), mode=Mode.PRIVATE) as cut_extrude7_sk2:
        with BuildLine():
            add(Edge.make_bspline(
                [(-30, 24.110076465), (-22.082479944, 24.110076465), (-14.164959887, 20.240050977), (-10, 12.5)],
                knots=[0.5, 0.5, 0.5, 0.5, 1, 1, 1, 1], degree=3))
            ThreePointArc((-10, 12.5), (-11.128726859, 19.123824427), (-14.387505004, 25))
            Line((-14.387505004, 25), (-30, 25))
            Line((-30, 25), (-30, 24.110076465))
        make_face()
    cut_extrude7_tool2 = extrude(cut_extrude7_sk2.sketch, amount=CUT_EXTRUDE7_REACH, mode=Mode.PRIVATE) & cut_extrude7_end
    add(cut_extrude7_tool2.solids().sort_by_distance((0, 21.59828, 16.984521))[0], mode=Mode.SUBTRACT)
    # Sketch11 → Cut-Extrude7 (cut, up to the surface)
    with BuildSketch(Plane(origin=(0, 0, 0), x_dir=(0, 0, -1), z_dir=(1, 0, 0)), mode=Mode.PRIVATE) as cut_extrude7_sk3:
        with BuildLine():
            ThreePointArc((-14.387505004, 25), (-11.128726859, 19.123824427), (-10, 12.5))
            Line((-10, 12.5), (-10, 25))
            Line((-10, 25), (-14.387505004, 25))
        make_face()
    cut_extrude7_tool3 = extrude(cut_extrude7_sk3.sketch, amount=CUT_EXTRUDE7_REACH, mode=Mode.PRIVATE) & cut_extrude7_end
    add(cut_extrude7_tool3.solids().sort_by_distance((0, 21.947708, 11.287174))[0], mode=Mode.SUBTRACT)

    # Cut-Extrude7 direction 2: up to this cylinder (the profile starts inside it)
    cut_extrude7_direction_2_end = Plane(origin=(0, 0, 27.7442175), z_dir=(0, 0, 1)) * Cylinder(CUT_EXTRUDE7_DIRECTION_2_END_RADIUS, 227.198087, mode=Mode.PRIVATE)
    # Sketch11 → Cut-Extrude7 direction 2 (cut, up to the surface)
    with BuildSketch(Plane(origin=(0, 0, 0), x_dir=(0, 0, -1), z_dir=(1, 0, 0)), mode=Mode.PRIVATE) as cut_extrude7_direction_2_sk1:
        with BuildLine():
            add(Edge.make_bspline(
                [(-50, 12.5), (-45.835040113, 20.240050977), (-37.917520056, 24.110076465), (-30, 24.110076465)],
                knots=[0, 0, 0, 0, 0.5, 0.5, 0.5, 0.5], degree=3))
            Line((-30, 24.110076465), (-30, 25))
            Line((-30, 25), (-50, 25))
            Line((-50, 25), (-50, 12.5))
        make_face()
    cut_extrude7_direction_2_tool1 = extrude(cut_extrude7_direction_2_sk1.sketch, amount=-CUT_EXTRUDE7_DIRECTION_2_REACH, mode=Mode.PRIVATE) & cut_extrude7_direction_2_end
    add(cut_extrude7_direction_2_tool1.solids().sort_by_distance((0, 21.671006, 44.201261))[0], mode=Mode.SUBTRACT)
    # Sketch11 → Cut-Extrude7 direction 2 (cut, up to the surface)
    with BuildSketch(Plane(origin=(0, 0, 0), x_dir=(0, 0, -1), z_dir=(1, 0, 0)), mode=Mode.PRIVATE) as cut_extrude7_direction_2_sk2:
        with BuildLine():
            add(Edge.make_bspline(
                [(-30, 24.110076465), (-22.082479944, 24.110076465), (-14.164959887, 20.240050977), (-10, 12.5)],
                knots=[0.5, 0.5, 0.5, 0.5, 1, 1, 1, 1], degree=3))
            ThreePointArc((-10, 12.5), (-11.128726859, 19.123824427), (-14.387505004, 25))
            Line((-14.387505004, 25), (-30, 25))
            Line((-30, 25), (-30, 24.110076465))
        make_face()
    cut_extrude7_direction_2_tool2 = extrude(cut_extrude7_direction_2_sk2.sketch, amount=-CUT_EXTRUDE7_DIRECTION_2_REACH, mode=Mode.PRIVATE) & cut_extrude7_direction_2_end
    add(cut_extrude7_direction_2_tool2.solids().sort_by_distance((0, 21.59828, 16.984521))[0], mode=Mode.SUBTRACT)
    # Sketch11 → Cut-Extrude7 direction 2 (cut, up to the surface)
    with BuildSketch(Plane(origin=(0, 0, 0), x_dir=(0, 0, -1), z_dir=(1, 0, 0)), mode=Mode.PRIVATE) as cut_extrude7_direction_2_sk3:
        with BuildLine():
            ThreePointArc((-14.387505004, 25), (-11.128726859, 19.123824427), (-10, 12.5))
            Line((-10, 12.5), (-10, 25))
            Line((-10, 25), (-14.387505004, 25))
        make_face()
    cut_extrude7_direction_2_tool3 = extrude(cut_extrude7_direction_2_sk3.sketch, amount=-CUT_EXTRUDE7_DIRECTION_2_REACH, mode=Mode.PRIVATE) & cut_extrude7_direction_2_end
    add(cut_extrude7_direction_2_tool3.solids().sort_by_distance((0, 21.947708, 11.287174))[0], mode=Mode.SUBTRACT)

    # Sketch12 → Cut-Extrude8 (cut)
    with BuildSketch(Plane(origin=(14.879426293, 0, 0), x_dir=(0, 0, -1), z_dir=(1, 0, 0))):
        with Locations((-55, -0.928822967)):
            Rectangle(SKETCH12_W, SKETCH12_H)
    extrude(amount=-CUT_EXTRUDE8_DEPTH, mode=Mode.SUBTRACT)

    # Sketch13 → Cut-Extrude9 (cut)
    with BuildSketch(Plane(origin=(15.879426293, 0, 0), x_dir=(0, 0, -1), z_dir=(1, 0, 0))):
        with Locations((-5, -0.930632571)):
            Rectangle(SKETCH13_W, SKETCH13_H)
    extrude(amount=-CUT_EXTRUDE9_DEPTH, mode=Mode.SUBTRACT)

    # Sketch14 → Boss-Extrude4 (add)
    with BuildSketch(Plane(origin=(25, 0, 0), x_dir=(0, 0, -1), z_dir=(1, 0, 0))):
        with Locations(Location((-13.75, -5.517879978, 0), (0, 0, 180))):
            Circle(SKETCH14_R)
        with Locations(Location((-46.25, -5.517879978, 0), (0, 0, 180))):
            Circle(SKETCH14_R)
    extrude(amount=BOSS_EXTRUDE4_DEPTH)

    # Sketch15 → Boss-Extrude5 (add)
    with BuildSketch(Plane.ZY.offset(25).offset(BOSS_EXTRUDE5_START)):
        with Locations((13.75, -5.517879978)):
            Circle(SKETCH15_R)
        with Locations((46.25, -5.517879978)):
            Circle(SKETCH15_R)
    extrude(amount=-BOSS_EXTRUDE5_DEPTH)


solid = part.part
